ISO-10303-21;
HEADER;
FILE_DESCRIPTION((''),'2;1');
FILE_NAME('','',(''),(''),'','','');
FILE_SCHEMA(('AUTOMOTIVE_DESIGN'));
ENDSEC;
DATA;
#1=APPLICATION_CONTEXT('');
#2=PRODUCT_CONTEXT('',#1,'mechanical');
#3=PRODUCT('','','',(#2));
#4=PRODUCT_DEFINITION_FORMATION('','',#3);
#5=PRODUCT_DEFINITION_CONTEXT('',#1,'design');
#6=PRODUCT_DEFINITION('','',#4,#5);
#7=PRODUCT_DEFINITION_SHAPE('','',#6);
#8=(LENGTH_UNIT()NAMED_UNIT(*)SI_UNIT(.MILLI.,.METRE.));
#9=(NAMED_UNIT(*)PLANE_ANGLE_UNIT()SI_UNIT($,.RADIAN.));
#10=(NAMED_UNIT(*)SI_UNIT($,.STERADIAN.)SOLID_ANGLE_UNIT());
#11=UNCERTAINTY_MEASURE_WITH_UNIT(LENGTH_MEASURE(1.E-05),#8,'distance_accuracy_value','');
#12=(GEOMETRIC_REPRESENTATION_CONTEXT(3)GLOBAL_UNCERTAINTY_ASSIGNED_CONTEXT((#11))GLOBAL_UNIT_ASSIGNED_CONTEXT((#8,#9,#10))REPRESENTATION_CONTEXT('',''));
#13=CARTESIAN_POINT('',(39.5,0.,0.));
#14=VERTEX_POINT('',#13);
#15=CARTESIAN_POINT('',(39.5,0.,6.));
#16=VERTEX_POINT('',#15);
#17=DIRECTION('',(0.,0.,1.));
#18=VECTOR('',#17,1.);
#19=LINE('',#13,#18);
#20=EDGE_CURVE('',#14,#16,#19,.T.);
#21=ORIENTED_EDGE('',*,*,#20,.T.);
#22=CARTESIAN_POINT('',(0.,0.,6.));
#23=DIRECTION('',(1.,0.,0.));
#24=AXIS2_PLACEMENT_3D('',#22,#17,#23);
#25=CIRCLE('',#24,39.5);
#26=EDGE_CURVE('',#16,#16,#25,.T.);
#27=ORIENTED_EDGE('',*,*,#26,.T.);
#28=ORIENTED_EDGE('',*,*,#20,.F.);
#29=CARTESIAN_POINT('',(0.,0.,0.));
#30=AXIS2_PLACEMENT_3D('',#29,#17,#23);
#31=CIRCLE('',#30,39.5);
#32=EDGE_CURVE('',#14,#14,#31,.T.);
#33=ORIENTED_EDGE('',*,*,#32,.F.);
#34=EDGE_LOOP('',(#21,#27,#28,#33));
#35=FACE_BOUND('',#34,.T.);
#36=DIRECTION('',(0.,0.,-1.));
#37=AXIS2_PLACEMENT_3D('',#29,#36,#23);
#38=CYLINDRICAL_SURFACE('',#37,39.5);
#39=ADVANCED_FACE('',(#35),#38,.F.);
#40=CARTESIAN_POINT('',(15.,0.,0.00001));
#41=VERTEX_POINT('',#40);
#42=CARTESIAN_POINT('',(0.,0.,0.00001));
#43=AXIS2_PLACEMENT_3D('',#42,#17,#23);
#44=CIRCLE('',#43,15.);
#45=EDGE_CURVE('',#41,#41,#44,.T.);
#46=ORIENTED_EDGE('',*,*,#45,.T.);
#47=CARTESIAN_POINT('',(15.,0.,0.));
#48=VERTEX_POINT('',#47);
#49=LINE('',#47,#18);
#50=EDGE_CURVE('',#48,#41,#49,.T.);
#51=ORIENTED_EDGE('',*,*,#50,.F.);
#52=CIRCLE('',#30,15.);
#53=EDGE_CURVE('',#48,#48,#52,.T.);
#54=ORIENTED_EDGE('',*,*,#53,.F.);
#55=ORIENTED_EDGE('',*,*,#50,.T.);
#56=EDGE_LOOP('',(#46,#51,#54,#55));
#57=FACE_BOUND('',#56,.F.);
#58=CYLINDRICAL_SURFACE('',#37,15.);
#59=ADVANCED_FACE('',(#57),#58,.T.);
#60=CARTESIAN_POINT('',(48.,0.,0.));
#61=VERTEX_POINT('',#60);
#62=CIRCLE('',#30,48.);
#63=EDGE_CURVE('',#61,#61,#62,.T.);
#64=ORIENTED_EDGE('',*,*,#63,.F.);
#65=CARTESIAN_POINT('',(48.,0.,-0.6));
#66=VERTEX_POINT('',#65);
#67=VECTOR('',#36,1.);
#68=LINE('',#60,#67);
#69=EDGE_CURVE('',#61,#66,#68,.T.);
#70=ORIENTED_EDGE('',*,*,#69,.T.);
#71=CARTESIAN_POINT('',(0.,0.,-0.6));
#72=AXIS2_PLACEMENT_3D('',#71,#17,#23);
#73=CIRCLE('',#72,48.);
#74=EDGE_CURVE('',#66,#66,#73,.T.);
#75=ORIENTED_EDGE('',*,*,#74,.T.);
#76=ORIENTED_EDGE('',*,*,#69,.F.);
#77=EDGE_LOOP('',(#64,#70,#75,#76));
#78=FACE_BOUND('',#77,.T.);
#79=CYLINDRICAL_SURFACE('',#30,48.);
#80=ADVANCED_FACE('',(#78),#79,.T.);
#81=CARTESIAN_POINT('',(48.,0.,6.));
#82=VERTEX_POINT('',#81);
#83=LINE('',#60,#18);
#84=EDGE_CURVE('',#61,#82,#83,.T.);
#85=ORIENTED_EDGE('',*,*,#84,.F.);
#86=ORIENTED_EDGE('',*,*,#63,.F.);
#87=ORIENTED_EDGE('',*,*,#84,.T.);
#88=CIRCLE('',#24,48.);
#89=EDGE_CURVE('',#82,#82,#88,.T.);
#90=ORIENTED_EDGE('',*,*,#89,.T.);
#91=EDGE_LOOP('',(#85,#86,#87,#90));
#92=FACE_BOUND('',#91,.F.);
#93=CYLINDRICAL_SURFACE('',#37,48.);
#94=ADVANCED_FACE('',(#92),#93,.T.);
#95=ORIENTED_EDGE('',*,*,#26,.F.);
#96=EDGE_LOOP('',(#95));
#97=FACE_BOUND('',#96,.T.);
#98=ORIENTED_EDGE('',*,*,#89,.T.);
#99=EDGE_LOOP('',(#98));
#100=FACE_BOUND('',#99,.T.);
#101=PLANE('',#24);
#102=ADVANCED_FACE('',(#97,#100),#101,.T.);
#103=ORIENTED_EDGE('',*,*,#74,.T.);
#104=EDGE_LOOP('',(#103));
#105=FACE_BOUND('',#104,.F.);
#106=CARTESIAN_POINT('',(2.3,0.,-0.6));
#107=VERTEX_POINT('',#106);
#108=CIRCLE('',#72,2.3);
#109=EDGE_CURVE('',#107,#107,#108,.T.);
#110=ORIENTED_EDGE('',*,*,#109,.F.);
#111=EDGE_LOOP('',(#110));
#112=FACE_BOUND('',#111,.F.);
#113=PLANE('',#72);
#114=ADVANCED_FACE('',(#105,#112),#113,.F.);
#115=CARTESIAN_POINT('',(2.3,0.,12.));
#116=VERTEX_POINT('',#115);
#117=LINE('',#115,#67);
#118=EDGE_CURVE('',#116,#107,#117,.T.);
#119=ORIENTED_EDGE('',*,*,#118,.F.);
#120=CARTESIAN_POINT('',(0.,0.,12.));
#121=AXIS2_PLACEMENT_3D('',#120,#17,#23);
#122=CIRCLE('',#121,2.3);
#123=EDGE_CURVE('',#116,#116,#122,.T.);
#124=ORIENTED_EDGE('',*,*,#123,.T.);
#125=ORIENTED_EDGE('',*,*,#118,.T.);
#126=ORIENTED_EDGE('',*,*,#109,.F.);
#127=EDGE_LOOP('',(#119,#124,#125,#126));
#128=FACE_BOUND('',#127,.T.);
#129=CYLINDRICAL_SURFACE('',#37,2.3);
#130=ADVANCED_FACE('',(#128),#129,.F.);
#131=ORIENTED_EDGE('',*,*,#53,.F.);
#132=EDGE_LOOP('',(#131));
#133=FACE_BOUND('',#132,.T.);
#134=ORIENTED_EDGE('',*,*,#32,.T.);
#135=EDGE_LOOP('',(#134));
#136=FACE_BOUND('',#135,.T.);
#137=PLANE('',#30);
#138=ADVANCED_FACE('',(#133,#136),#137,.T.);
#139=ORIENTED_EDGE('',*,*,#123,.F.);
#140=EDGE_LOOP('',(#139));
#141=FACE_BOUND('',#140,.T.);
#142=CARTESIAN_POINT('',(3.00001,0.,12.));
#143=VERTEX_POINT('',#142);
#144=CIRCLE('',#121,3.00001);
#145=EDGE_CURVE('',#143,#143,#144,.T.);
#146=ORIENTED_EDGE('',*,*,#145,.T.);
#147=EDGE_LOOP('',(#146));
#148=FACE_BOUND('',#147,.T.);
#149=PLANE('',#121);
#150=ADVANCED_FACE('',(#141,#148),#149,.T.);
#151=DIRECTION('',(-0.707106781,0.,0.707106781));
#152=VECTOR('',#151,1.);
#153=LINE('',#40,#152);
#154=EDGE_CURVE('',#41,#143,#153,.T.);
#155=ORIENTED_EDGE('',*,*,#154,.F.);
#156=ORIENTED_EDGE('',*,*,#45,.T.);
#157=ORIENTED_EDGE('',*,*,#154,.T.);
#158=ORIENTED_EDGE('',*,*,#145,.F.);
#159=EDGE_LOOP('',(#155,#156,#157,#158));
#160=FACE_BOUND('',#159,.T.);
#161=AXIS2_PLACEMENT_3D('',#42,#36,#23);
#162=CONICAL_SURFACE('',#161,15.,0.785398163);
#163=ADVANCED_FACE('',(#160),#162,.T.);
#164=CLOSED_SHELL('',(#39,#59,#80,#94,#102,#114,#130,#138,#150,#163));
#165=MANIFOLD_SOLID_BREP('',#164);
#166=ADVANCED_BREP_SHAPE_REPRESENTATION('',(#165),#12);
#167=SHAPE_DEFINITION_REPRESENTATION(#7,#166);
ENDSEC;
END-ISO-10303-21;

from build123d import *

# Parameters (mm, degrees)
F0_R     = 15
F0_R_2   = 2.3
F1_DEPTH = 12
F0_R_3   = 48
F0_R_4   = 39.5
F2_DEPTH = 0.6
F3_SIZE  = 11.99999
F4_DEPTH = 6


# Not quite as in the source:
# - a fillet or chamfer is up to 0.001 mm smaller than in the source, because OpenCascade refuses the exact size


with BuildPart() as f1:
    # F0 (on Top) → F1 (new body)
    with BuildSketch(Plane.XY):
        Circle(F0_R)
        Circle(F0_R_2, mode=Mode.SUBTRACT)
    extrude(amount=F1_DEPTH)

    # F0 (on Top) → F2 (join)
    with BuildSketch(Plane.XY):
        Circle(F0_R_3)
        Circle(F0_R_4, mode=Mode.SUBTRACT)
        Circle(F0_R_4)
        Circle(F0_R, mode=Mode.SUBTRACT)
        Circle(F0_R)
        Circle(F0_R_2, mode=Mode.SUBTRACT)
    extrude(amount=-F2_DEPTH)

    # F3 (size 12 in the source; OpenCascade refuses exactly that, so slightly less here)
    f3_edges = [f1.edges().sort_by_distance(p)[0] for p in [
        (-15, 0, 12),
    ]]
    chamfer(f3_edges, length=F3_SIZE)

    # F0 (on Top) → F4 (join)
    with BuildSketch(Plane.XY):
        Circle(F0_R_3)
        Circle(F0_R_4, mode=Mode.SUBTRACT)
    extrude(amount=F4_DEPTH)


solid = f1.part
